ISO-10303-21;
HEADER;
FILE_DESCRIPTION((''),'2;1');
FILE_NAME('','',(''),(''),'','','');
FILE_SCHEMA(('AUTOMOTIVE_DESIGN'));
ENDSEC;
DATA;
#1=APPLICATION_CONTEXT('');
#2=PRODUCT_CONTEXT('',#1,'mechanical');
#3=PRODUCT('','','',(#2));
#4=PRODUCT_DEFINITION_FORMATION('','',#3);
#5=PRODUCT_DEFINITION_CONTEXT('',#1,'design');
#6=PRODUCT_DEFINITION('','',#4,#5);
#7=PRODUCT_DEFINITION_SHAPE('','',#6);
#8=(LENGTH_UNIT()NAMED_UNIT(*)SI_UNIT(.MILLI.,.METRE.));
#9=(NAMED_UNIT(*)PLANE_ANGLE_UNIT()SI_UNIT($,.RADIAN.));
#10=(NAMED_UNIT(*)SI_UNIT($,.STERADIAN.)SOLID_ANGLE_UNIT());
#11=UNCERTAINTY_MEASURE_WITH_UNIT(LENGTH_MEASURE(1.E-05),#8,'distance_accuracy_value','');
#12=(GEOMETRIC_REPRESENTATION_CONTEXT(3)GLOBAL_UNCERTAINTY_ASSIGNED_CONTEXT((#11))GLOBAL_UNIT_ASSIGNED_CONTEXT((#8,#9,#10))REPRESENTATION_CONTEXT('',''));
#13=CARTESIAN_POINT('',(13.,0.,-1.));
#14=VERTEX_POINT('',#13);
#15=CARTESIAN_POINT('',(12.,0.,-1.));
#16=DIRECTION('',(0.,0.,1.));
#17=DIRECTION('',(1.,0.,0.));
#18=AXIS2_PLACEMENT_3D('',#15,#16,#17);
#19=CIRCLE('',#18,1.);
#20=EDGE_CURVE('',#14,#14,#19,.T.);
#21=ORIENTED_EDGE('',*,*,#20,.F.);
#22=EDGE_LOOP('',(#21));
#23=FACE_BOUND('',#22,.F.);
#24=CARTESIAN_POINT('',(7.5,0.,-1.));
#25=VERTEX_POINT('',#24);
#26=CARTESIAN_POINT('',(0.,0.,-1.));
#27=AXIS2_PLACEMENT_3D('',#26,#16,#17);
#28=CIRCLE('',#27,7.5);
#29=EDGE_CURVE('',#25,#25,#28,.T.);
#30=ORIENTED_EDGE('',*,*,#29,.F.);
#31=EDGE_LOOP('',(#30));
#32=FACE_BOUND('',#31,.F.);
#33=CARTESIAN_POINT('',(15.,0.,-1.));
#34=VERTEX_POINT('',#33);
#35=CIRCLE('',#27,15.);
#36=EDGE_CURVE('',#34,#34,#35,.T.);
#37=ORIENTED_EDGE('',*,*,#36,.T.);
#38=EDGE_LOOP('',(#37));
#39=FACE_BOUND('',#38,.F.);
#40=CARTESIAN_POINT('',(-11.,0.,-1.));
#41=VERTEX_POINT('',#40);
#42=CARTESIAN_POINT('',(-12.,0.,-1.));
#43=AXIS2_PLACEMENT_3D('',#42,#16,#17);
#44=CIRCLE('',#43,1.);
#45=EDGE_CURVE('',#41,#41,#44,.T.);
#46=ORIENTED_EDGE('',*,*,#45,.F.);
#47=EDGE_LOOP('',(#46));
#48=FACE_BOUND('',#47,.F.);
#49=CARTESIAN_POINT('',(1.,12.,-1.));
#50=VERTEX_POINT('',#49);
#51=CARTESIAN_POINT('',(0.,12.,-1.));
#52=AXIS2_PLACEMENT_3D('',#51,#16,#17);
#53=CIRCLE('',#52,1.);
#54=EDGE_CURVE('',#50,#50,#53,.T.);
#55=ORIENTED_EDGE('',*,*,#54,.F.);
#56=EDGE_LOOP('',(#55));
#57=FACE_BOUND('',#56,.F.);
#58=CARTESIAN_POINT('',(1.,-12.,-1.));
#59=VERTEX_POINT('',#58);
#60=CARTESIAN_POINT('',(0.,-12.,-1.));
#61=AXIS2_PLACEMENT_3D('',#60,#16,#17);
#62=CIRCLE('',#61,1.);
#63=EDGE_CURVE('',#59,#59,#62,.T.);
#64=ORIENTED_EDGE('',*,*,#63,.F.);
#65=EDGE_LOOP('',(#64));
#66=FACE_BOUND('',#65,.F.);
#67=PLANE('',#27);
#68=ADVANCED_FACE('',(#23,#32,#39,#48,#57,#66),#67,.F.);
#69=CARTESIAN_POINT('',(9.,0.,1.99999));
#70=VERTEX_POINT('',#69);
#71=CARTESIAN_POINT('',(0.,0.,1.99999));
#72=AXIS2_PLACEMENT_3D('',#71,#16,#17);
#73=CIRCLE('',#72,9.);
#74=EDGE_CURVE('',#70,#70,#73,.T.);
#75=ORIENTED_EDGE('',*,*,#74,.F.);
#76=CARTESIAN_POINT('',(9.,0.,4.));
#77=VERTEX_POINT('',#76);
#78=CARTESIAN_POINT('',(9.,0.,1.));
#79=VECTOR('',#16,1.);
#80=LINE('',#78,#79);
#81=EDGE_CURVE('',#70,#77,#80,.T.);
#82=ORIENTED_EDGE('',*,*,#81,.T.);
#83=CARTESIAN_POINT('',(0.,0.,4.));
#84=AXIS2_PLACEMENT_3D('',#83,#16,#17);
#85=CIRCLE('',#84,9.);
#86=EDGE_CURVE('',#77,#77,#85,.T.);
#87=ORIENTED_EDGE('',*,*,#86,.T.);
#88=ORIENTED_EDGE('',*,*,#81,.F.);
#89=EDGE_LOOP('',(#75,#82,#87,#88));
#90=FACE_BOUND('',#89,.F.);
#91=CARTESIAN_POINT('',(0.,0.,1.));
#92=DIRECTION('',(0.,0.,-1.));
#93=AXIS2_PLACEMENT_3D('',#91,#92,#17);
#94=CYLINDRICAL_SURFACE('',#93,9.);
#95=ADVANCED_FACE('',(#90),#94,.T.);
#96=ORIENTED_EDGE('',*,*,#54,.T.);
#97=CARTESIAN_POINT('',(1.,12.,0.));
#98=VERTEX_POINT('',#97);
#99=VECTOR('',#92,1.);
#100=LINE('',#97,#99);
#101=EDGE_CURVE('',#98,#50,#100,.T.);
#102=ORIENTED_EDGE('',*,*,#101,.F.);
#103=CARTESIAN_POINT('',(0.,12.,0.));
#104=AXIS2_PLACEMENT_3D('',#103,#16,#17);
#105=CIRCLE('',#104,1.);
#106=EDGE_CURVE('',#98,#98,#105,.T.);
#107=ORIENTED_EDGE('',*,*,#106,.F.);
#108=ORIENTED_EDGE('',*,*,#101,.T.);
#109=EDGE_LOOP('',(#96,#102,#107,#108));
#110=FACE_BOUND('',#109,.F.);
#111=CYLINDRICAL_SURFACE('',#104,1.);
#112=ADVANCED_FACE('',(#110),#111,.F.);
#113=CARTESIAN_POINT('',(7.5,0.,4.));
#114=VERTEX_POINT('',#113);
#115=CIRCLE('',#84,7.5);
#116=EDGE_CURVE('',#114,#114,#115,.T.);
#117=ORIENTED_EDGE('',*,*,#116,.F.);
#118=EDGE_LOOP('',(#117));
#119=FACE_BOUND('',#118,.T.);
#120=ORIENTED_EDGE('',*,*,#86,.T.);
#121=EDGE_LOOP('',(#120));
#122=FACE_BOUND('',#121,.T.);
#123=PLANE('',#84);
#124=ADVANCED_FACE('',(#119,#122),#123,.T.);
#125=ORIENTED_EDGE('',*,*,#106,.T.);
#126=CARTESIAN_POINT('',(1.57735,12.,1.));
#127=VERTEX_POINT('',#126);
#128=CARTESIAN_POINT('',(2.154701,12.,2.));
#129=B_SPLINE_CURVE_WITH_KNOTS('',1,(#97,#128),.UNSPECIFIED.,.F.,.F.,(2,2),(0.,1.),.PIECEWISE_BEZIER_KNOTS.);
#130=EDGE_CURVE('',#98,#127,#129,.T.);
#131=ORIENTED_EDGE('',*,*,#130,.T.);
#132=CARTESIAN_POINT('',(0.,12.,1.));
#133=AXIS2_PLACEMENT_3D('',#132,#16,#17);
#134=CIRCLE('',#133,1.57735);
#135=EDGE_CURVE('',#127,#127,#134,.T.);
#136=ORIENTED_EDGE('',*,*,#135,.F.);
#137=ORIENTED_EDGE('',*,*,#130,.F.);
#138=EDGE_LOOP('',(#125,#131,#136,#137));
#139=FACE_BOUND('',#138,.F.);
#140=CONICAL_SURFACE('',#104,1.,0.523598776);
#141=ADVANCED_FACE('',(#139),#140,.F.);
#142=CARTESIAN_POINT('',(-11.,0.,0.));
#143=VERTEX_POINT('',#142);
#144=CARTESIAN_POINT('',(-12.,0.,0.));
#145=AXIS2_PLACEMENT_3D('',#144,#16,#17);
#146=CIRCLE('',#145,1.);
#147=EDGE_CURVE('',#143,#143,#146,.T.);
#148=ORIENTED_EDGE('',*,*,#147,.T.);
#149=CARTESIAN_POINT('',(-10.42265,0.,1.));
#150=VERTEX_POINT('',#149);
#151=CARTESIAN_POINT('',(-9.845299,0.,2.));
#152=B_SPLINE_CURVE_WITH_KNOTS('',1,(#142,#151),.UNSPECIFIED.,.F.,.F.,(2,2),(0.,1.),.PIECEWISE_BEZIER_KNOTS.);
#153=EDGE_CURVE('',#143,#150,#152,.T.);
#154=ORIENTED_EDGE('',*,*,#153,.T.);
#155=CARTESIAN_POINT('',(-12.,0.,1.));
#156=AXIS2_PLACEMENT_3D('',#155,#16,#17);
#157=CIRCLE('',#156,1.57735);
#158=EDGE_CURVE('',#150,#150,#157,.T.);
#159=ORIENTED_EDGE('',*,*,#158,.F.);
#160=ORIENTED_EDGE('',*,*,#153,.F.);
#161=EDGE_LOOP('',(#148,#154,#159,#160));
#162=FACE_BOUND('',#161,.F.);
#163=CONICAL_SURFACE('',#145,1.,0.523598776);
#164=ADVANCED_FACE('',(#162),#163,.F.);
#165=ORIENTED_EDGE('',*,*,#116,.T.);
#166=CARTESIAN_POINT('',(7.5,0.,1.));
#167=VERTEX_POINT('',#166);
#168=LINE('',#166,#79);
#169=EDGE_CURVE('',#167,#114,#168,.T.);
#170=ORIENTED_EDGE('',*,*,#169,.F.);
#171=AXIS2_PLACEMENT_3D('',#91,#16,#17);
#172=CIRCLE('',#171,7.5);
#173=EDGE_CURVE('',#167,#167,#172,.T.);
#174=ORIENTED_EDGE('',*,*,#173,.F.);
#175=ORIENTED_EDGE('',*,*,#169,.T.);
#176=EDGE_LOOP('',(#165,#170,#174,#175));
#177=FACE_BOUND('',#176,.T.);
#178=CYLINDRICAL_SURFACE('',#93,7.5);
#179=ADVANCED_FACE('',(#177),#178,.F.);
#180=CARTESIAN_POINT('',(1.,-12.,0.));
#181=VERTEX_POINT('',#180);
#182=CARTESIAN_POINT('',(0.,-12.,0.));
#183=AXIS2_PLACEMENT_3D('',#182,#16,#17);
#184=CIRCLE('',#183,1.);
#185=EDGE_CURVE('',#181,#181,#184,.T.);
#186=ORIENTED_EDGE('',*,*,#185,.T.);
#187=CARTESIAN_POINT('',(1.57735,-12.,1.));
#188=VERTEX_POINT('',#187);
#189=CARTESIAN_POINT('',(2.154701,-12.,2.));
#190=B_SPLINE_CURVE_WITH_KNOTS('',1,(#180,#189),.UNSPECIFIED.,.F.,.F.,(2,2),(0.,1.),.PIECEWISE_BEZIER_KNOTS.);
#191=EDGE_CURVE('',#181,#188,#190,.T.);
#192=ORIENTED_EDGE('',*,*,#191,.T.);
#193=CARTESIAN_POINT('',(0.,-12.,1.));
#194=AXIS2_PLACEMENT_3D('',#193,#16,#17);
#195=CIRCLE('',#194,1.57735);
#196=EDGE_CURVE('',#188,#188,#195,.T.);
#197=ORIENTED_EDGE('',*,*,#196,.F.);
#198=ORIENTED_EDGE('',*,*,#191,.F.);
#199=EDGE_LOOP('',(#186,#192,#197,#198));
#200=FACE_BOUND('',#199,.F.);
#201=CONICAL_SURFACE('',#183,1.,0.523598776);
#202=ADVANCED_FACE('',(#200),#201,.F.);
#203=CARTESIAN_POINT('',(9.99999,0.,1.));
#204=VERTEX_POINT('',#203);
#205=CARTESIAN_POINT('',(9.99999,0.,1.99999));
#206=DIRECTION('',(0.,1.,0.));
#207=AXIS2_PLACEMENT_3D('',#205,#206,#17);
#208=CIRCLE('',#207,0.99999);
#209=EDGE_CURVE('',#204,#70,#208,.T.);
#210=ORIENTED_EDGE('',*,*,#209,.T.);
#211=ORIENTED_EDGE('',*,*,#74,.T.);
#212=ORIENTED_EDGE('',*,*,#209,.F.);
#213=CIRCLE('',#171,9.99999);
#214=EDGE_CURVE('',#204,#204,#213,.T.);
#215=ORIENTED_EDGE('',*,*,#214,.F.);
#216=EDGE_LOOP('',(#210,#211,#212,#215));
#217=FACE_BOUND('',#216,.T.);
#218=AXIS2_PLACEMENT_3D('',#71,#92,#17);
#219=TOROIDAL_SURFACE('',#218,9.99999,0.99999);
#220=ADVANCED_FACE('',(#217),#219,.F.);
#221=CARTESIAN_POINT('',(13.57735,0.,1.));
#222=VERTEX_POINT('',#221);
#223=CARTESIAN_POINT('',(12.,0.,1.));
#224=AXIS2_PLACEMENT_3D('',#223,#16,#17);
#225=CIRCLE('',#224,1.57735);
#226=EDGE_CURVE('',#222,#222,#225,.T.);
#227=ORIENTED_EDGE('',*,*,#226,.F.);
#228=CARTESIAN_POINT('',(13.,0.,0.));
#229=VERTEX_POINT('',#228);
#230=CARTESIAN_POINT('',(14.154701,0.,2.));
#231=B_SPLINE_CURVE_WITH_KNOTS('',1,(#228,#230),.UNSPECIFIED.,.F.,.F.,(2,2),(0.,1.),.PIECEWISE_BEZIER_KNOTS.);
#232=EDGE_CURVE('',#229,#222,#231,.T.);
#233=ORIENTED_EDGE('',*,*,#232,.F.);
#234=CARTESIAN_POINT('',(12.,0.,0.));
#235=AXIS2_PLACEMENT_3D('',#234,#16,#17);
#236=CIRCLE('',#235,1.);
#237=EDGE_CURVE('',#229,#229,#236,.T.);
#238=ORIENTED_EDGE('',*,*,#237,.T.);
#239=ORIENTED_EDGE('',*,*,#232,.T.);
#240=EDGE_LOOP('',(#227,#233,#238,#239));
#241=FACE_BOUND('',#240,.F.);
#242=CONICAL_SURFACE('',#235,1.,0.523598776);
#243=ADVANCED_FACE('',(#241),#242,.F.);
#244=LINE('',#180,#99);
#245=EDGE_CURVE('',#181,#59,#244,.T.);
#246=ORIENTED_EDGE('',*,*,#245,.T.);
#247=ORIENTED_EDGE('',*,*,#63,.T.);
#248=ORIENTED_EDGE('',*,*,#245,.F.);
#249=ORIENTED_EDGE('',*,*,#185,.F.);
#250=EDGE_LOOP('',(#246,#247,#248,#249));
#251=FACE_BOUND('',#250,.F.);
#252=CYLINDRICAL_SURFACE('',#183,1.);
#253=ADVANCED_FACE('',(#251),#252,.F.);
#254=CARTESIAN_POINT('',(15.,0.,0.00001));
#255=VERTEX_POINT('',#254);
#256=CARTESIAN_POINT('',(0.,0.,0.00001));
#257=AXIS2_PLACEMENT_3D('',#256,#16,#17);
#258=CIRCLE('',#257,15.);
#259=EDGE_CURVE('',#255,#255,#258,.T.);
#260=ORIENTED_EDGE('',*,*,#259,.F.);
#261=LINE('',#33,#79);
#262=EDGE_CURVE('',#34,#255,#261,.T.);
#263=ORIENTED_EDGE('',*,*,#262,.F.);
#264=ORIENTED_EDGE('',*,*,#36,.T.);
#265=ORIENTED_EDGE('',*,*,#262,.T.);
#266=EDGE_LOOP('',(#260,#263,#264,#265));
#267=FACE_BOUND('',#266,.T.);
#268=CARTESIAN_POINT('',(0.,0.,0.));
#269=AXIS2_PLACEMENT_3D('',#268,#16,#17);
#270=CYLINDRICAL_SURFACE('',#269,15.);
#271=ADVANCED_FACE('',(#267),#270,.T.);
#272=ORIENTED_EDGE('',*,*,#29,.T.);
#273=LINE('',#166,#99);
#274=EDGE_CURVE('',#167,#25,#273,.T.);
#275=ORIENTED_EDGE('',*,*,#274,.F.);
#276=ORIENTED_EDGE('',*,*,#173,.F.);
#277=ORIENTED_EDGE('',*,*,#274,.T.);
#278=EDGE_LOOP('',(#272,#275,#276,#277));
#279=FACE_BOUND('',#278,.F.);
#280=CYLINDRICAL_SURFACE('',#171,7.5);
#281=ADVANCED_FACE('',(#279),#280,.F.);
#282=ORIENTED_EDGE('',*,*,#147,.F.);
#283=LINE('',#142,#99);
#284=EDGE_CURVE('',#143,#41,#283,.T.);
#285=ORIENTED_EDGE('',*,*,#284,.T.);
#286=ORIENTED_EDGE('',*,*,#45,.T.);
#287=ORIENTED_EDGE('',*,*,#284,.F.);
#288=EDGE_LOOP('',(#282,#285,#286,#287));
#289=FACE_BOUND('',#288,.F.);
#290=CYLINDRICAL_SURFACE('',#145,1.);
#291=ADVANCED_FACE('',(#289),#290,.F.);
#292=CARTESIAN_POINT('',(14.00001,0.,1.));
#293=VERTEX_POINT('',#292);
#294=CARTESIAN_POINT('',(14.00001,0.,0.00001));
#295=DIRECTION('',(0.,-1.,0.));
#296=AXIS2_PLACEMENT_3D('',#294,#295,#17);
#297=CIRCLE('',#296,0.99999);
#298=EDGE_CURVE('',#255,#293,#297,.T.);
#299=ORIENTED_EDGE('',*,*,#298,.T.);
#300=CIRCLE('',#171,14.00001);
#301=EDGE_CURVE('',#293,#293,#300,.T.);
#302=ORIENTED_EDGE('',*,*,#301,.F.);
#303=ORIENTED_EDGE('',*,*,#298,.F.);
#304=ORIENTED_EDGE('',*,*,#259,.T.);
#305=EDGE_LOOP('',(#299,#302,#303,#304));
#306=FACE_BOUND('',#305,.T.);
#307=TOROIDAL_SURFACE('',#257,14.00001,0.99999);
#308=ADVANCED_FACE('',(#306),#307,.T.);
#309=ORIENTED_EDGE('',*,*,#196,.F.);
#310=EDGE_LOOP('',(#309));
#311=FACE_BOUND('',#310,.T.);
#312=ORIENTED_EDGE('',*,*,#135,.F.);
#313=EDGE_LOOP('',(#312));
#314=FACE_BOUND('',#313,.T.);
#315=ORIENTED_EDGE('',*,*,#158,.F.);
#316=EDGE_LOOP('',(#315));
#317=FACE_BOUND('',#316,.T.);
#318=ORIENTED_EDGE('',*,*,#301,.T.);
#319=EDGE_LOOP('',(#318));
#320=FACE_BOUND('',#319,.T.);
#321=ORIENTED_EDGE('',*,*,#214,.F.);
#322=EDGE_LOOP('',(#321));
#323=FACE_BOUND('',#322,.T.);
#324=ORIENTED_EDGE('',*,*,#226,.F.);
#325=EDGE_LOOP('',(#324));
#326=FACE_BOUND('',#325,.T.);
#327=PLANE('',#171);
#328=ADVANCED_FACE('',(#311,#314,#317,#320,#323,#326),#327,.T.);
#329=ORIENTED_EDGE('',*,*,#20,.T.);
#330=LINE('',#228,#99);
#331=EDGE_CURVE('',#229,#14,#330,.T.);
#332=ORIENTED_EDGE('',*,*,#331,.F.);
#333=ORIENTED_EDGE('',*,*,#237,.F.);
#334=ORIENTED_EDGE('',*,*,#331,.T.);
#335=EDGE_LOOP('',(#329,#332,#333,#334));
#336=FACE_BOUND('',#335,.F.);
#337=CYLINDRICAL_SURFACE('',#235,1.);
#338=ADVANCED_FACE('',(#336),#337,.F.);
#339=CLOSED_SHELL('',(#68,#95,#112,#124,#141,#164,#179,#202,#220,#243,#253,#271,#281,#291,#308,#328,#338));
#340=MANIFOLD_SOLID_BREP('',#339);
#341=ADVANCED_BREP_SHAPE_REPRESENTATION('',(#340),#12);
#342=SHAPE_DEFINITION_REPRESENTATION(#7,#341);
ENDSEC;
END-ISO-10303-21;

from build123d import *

# Parameters (mm, degrees)
F0_R          = 15
F1_DEPTH      = 1
F1_DEPTH_BACK = 1
F2_R          = 1
F3_DEPTH      = 2
F3_DEPTH_BACK = 2
F3_TAPER_BACK = -30
F4_R          = 9
F4_R_2        = 7.5
F5_DEPTH      = 3
F6_DEPTH      = 5
F7_R          = 0.99999


# Not quite as in the source:
# - a fillet or chamfer is up to 0.001 mm smaller than in the source, because OpenCascade refuses the exact size


with BuildPart() as f1:
    # F0 (on Top) → F1 (new body, two sides)
    with BuildSketch(Plane.XY) as f1_sk:
        Circle(F0_R)
    extrude(amount=F1_DEPTH)
    extrude(f1_sk.sketch, amount=-F1_DEPTH_BACK)

    # F2 (on Top) → F3 (cut, two sides)
    with BuildSketch(Plane.XY) as f3_sk:
        with Locations((12, 0)):
            Circle(F2_R)
        with Locations((0, 12)):
            Circle(F2_R)
        with Locations((-12, 0)):
            Circle(F2_R)
        with Locations((0, -12)):
            Circle(F2_R)
    extrude(amount=-F3_DEPTH, mode=Mode.SUBTRACT)
    extrude(f3_sk.sketch, amount=F3_DEPTH_BACK, taper=F3_TAPER_BACK, mode=Mode.SUBTRACT)

    # F4 (on face) → F5 (join)
    with BuildSketch(Plane.XY.offset(1)):
        Circle(F4_R)
        Circle(F4_R_2, mode=Mode.SUBTRACT)
    extrude(amount=F5_DEPTH)

    # F6 (cut): a face of the model
    f6_faces = [f1.faces().sort_by_distance(p)[0] for p in [
        (0, 0, 1),
    ]]
    extrude(f6_faces, amount=-F6_DEPTH, mode=Mode.SUBTRACT)

    # F7 (radius 1 in the source; OpenCascade refuses exactly that, so slightly less here)
    f7_edges = [f1.edges().sort_by_distance(p)[0] for p in [
        (-15, 0, 1),
        (-9, 0, 1),
    ]]
    fillet(f7_edges, radius=F7_R)


solid = f1.part
